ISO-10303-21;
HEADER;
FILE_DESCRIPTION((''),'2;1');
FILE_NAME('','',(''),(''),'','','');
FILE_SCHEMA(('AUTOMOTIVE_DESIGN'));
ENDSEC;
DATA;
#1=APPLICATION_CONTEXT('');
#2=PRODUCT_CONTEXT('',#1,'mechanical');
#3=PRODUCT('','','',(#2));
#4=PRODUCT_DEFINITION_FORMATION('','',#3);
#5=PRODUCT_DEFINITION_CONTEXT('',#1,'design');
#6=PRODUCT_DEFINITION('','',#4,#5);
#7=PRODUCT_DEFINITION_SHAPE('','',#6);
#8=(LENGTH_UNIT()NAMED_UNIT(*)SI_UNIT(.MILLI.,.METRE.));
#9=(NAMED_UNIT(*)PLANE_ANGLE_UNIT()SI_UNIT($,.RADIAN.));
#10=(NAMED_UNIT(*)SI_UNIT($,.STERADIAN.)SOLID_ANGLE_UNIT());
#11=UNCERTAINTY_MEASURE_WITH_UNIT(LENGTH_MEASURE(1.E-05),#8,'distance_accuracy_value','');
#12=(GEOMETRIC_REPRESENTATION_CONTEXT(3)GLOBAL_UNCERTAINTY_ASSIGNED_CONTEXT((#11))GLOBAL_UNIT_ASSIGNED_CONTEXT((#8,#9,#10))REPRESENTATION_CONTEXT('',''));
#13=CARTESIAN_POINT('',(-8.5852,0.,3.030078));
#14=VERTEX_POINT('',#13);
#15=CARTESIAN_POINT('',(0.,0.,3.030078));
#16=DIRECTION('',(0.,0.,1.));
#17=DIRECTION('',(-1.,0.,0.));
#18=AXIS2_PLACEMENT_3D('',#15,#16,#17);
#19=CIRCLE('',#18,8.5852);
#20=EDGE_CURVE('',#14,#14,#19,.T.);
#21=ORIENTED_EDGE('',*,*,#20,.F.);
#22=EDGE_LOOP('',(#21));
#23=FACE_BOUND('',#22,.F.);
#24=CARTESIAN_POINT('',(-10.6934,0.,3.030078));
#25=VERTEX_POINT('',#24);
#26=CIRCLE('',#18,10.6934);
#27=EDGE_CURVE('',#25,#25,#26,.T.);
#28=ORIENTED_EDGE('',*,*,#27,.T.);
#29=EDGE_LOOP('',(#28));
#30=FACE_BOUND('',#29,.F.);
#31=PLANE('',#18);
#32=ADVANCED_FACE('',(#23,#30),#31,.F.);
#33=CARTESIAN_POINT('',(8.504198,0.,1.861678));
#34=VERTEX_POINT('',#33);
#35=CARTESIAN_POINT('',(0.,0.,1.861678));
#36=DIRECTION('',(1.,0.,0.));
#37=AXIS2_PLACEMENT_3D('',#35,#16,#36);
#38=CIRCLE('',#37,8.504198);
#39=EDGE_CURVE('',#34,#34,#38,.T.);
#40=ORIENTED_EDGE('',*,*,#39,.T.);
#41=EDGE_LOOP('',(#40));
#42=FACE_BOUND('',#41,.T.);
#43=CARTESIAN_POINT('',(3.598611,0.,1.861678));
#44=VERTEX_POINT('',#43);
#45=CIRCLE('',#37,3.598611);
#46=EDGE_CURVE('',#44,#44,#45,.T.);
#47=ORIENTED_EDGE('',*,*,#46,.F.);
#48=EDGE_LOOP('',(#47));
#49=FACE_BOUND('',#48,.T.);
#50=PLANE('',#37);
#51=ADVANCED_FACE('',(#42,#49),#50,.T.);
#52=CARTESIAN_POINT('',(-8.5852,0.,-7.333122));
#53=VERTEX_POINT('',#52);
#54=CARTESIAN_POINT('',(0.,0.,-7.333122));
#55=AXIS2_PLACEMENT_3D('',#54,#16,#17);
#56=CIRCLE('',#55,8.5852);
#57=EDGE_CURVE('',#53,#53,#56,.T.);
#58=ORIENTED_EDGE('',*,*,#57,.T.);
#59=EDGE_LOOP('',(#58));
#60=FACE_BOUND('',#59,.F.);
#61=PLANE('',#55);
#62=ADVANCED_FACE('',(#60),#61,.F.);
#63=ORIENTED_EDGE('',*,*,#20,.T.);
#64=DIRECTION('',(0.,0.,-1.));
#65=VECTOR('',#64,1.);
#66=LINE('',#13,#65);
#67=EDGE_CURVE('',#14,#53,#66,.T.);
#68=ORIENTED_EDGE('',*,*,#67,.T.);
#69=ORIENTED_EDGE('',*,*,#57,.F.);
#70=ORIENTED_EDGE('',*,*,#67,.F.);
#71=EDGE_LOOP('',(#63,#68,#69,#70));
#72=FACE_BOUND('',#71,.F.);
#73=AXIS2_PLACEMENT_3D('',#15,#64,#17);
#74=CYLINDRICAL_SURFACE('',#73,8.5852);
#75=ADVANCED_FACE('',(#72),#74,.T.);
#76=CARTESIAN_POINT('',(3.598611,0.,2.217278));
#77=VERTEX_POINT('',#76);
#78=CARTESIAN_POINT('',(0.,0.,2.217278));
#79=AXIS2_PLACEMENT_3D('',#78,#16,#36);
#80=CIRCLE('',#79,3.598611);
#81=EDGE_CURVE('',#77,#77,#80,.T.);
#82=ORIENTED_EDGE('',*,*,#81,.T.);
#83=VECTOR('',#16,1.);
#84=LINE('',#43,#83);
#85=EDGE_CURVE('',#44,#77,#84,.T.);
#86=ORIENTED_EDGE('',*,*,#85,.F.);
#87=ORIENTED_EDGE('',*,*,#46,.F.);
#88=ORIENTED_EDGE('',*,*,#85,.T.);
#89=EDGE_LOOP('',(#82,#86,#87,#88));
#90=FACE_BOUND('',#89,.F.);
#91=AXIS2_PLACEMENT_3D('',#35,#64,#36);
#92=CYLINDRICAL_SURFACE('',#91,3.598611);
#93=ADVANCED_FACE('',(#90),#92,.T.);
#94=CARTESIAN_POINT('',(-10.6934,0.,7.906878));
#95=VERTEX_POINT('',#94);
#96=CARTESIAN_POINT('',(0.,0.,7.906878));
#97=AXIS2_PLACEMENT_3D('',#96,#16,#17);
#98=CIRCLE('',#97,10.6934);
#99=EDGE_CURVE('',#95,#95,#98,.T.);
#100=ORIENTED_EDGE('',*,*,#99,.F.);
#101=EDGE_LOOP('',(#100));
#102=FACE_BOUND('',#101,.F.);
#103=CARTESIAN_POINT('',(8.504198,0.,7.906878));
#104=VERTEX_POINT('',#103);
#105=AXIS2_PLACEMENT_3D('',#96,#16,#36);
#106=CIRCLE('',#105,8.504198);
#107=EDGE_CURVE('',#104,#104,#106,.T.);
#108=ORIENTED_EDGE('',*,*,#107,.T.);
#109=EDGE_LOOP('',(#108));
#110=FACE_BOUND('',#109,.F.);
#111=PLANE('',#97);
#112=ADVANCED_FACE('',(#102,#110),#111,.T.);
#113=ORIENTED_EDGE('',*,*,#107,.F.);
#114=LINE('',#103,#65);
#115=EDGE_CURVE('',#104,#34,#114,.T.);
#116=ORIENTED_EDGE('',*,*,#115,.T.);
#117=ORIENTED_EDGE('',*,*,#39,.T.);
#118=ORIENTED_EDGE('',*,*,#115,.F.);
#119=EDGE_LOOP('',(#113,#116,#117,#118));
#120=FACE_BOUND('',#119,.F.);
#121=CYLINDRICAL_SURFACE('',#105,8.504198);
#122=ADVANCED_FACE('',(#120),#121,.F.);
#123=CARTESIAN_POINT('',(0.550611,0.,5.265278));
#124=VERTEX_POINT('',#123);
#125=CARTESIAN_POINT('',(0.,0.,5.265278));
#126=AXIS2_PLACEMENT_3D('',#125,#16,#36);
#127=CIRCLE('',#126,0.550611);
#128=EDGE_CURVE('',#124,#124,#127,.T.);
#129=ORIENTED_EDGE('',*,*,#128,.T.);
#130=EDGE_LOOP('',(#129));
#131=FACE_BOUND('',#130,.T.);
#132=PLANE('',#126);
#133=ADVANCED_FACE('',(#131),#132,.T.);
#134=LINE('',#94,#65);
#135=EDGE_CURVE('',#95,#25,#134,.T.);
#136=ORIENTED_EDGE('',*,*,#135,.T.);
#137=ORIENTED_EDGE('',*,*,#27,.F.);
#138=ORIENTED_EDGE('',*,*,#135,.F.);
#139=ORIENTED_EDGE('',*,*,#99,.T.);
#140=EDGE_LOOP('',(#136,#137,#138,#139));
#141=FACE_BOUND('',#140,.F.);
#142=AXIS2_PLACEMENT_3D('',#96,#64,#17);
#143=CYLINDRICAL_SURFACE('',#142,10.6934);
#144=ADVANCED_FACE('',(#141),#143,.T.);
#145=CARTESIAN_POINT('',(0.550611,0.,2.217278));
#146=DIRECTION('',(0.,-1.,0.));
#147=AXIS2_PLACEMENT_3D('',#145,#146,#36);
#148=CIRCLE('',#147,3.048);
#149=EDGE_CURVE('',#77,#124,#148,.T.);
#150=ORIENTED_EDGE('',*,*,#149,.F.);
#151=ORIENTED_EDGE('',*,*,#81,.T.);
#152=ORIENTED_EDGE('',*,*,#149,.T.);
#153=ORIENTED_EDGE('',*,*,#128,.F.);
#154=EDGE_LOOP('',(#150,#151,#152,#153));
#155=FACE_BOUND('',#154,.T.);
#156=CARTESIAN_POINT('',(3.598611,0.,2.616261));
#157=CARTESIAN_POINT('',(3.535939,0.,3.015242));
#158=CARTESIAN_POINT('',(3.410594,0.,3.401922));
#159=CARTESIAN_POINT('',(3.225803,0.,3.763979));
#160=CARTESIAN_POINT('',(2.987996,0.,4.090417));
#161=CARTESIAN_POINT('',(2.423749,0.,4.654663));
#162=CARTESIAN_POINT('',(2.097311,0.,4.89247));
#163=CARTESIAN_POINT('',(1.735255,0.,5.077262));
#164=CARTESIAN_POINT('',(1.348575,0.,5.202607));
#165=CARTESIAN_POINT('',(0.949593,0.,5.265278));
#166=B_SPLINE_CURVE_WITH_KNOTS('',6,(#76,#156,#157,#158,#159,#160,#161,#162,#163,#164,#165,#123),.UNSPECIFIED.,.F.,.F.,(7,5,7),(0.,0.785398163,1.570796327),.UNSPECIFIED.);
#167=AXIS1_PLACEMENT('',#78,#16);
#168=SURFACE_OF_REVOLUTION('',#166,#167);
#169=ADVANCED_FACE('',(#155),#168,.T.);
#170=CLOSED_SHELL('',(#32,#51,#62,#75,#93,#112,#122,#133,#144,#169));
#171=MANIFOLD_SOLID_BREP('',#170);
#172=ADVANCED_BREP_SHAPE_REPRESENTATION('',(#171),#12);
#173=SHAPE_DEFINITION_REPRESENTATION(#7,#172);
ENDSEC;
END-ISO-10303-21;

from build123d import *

# Parameters (mm, degrees)
F2_R     = 8.5041977155
F3_DEPTH = 6.0452
F4_R     = 3.5986110649
F5_DEPTH = 3.4036
F6_R     = 3.048


# Not quite as in the source:
# - a feature of the source that left no trace in its solid (it failed there, or was rolled back) is left out


with BuildPart() as f1:
    # F0 (on Front) → F1 (revolve)
    with BuildSketch(Plane.XZ):
        Polygon((0, -7.3331215731), (0, 7.9068784269), (-10.6934, 7.9068784269), (-10.6934, 3.0300784269), (-8.5852, 3.0300784269), (-8.5852, -7.3331215731), align=None)
    revolve(axis=Axis((0, 0, 0.2868784269), (0, 0, 1)))

    # F2 (on face) → F3 (cut)
    with BuildSketch(Plane.XY.offset(7.9068784269)):
        Circle(F2_R)
    extrude(amount=-F3_DEPTH, mode=Mode.SUBTRACT)

    # F4 (on face) → F5 (join)
    with BuildSketch(Plane.XY.offset(1.8616784269)):
        Circle(F4_R)
    extrude(amount=F5_DEPTH)

    # F6
    f6_edges = [f1.edges().sort_by_distance(p)[0] for p in [
        (-3.598611, 0, 5.265278),
    ]]
    fillet(f6_edges, radius=F6_R)


solid = f1.part
